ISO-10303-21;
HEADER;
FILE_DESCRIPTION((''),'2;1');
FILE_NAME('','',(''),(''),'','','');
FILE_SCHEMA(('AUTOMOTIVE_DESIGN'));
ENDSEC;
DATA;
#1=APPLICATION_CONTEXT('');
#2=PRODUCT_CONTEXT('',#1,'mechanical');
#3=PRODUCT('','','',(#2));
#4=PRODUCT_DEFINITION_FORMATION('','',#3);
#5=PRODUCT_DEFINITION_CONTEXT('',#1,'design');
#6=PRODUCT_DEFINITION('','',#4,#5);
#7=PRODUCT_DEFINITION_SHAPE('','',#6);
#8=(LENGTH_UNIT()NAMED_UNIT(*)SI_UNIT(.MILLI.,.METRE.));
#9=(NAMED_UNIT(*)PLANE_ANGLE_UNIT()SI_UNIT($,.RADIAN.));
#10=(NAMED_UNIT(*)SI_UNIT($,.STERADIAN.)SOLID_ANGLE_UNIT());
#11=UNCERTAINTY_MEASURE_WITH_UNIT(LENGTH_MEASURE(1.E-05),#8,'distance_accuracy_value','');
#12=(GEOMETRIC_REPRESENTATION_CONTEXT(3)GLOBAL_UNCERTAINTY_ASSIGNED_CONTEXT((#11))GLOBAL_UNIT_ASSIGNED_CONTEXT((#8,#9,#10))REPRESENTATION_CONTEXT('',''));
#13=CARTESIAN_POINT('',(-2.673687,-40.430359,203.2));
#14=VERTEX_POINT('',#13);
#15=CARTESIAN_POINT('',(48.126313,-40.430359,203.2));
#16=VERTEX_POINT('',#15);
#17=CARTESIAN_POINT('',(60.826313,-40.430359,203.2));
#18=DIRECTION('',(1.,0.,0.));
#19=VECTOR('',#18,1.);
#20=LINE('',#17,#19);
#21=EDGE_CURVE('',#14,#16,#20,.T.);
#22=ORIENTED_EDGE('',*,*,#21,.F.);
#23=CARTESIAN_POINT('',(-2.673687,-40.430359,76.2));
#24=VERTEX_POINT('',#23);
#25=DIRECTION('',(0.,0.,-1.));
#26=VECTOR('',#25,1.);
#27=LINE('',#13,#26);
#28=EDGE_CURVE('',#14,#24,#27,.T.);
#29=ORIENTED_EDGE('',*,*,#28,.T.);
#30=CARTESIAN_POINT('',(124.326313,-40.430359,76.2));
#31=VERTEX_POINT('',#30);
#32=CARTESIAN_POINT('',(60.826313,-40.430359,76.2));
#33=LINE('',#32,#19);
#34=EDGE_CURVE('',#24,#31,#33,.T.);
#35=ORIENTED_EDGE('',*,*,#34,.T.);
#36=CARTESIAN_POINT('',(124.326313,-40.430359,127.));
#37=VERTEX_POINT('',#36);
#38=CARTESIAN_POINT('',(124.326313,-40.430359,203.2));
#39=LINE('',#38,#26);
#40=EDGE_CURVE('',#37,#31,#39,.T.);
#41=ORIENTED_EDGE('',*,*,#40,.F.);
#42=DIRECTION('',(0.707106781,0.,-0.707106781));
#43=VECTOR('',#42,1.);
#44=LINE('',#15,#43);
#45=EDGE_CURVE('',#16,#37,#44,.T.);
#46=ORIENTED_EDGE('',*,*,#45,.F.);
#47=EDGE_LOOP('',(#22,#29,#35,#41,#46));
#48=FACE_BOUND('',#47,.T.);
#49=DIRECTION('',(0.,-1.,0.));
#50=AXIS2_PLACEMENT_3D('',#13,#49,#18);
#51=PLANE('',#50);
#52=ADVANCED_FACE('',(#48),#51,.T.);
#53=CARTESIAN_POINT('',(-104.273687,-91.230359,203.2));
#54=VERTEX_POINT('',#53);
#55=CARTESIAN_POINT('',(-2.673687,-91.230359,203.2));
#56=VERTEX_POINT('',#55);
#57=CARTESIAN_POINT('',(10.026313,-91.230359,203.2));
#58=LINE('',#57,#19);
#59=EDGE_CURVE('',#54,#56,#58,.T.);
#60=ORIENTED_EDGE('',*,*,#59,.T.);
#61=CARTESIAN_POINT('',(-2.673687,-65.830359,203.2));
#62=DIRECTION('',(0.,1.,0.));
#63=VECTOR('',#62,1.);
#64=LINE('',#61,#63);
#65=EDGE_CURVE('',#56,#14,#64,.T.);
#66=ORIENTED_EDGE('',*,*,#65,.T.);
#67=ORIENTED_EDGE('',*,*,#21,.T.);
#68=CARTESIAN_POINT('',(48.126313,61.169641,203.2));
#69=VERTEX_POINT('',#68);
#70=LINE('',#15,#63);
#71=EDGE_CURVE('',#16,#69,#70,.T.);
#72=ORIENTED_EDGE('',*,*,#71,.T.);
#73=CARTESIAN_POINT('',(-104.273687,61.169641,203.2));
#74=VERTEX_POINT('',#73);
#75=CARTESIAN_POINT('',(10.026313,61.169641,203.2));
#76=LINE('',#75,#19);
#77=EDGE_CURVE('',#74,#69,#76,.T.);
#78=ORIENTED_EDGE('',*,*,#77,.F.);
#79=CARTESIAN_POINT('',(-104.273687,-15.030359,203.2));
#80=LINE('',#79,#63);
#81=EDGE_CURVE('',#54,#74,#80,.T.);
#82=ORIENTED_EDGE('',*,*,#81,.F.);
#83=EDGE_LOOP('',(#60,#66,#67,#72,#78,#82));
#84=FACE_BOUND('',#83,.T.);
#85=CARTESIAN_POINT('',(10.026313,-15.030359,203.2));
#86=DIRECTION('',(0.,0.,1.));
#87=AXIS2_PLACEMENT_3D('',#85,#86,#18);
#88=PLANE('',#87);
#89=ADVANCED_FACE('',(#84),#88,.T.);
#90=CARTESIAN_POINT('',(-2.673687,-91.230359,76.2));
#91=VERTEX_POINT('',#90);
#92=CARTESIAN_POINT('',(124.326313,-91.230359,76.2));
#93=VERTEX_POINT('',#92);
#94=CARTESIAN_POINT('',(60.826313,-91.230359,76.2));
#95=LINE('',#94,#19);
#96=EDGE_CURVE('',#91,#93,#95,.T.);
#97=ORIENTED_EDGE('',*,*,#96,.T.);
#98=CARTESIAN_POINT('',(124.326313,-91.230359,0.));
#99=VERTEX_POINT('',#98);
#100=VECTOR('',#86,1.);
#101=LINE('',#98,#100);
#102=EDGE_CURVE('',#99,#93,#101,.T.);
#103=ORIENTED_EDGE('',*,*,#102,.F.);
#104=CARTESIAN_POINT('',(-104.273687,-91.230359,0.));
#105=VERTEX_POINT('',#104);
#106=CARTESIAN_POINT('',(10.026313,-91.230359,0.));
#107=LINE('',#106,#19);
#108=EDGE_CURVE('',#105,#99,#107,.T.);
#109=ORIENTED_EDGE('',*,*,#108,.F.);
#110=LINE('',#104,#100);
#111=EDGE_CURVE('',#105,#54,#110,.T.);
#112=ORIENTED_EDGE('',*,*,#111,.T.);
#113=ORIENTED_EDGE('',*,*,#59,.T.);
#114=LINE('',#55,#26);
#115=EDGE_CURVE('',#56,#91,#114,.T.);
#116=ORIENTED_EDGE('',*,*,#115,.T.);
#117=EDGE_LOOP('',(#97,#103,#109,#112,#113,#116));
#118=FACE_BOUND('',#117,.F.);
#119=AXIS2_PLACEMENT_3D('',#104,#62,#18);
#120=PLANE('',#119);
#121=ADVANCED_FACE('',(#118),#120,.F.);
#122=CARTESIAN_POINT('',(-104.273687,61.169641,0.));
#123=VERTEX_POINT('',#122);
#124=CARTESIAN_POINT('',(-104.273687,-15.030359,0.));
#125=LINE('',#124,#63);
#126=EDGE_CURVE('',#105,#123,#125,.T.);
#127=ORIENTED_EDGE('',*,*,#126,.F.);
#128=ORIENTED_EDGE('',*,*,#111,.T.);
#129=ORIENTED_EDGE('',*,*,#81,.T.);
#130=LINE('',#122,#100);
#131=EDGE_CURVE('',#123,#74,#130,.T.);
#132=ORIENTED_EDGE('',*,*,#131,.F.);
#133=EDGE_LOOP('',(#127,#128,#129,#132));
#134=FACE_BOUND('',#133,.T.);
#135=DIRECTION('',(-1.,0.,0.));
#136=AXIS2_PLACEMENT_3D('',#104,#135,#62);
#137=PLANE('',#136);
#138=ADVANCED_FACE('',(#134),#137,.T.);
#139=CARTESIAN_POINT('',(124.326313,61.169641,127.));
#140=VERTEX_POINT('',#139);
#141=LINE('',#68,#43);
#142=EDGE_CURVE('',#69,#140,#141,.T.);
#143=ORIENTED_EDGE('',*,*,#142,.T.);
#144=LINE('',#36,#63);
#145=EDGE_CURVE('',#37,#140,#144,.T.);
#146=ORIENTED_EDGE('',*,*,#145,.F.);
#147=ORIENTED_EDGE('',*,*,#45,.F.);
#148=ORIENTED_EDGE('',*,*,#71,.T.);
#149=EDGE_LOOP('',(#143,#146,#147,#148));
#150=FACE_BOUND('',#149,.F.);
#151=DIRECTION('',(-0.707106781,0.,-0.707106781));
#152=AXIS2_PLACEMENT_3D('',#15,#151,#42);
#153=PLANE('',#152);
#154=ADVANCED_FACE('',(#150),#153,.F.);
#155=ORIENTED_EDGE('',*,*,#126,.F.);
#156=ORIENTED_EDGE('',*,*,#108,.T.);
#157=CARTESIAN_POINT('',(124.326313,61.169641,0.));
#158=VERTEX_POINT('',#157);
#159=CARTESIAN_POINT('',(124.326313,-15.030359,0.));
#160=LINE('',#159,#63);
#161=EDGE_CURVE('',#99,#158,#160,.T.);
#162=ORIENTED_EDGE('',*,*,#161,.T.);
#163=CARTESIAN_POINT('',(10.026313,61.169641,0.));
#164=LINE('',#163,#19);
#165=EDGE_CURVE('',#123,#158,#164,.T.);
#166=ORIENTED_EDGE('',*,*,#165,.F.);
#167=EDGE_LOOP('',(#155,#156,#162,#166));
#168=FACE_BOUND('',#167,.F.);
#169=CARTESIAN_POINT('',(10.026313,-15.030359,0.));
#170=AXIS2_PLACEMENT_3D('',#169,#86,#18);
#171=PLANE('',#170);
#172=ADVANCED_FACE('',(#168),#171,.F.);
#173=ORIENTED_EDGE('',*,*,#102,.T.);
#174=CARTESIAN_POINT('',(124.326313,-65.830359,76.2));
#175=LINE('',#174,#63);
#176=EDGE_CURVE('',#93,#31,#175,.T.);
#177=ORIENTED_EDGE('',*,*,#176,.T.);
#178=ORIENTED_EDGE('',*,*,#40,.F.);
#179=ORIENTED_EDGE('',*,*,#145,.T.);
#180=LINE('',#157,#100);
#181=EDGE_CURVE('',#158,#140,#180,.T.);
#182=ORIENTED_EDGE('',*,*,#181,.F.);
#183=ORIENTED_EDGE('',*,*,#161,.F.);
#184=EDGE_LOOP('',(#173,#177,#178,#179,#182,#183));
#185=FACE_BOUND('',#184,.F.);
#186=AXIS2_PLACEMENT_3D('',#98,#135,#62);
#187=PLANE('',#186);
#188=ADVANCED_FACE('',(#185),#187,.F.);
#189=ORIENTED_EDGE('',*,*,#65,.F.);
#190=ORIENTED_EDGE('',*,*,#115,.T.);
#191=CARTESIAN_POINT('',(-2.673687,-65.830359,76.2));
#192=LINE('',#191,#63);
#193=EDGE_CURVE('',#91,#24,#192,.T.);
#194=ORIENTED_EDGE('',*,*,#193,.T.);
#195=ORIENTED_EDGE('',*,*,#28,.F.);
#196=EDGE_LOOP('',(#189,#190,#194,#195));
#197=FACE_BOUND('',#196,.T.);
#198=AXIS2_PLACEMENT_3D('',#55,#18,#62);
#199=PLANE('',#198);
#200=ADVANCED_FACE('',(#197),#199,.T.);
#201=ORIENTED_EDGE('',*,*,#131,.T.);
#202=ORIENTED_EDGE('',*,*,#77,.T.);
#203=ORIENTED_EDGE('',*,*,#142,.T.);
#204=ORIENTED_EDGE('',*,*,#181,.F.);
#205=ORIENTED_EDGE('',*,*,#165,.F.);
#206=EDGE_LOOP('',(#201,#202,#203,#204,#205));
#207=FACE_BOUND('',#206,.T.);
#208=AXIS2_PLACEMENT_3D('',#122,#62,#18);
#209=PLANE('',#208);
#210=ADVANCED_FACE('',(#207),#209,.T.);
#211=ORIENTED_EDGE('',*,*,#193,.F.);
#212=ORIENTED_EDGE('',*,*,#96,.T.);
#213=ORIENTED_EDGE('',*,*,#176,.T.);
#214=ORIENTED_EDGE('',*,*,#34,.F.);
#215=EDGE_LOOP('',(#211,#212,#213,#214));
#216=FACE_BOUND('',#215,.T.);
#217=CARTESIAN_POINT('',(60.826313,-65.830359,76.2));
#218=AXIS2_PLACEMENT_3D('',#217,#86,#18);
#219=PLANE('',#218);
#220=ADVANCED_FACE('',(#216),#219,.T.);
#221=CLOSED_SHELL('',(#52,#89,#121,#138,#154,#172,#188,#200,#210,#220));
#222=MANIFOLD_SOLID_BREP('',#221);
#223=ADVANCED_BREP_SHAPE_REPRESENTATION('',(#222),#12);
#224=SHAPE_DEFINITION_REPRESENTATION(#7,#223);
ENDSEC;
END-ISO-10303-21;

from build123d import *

# Parameters (mm, degrees)
F0_W     = 228.6
F0_H     = 152.4
F1_DEPTH = 203.2
F2_W     = 127
F2_H     = 50.8
F3_DEPTH = 127
F5_DEPTH = 101.6


# Not quite as in the source:
# - a feature names something its author has since deleted; it is built from what else it names


with BuildPart() as f1:
    # F0 (on Top) → F1 (new body)
    with BuildSketch(Plane.XY):
        with Locations((10.0263133645, -15.0303587328)):
            Rectangle(F0_W, F0_H)
    extrude(amount=F1_DEPTH)

    # F2 (on face) → F3 (cut)
    with BuildSketch(Plane.XY.offset(203.2)):
        with Locations((60.8263133645, -65.8303587328)):
            Rectangle(F2_W, F2_H)
    extrude(amount=-F3_DEPTH, mode=Mode.SUBTRACT)

    # F4 (on face) → F5 (cut)
    with BuildSketch(Plane.XZ.offset(40.4303587328)):
        Polygon((124.3263133645, 203.2), (48.1263133645, 203.2), (124.3263133645, 127), align=None)
    extrude(amount=-F5_DEPTH, mode=Mode.SUBTRACT)


solid = f1.part
